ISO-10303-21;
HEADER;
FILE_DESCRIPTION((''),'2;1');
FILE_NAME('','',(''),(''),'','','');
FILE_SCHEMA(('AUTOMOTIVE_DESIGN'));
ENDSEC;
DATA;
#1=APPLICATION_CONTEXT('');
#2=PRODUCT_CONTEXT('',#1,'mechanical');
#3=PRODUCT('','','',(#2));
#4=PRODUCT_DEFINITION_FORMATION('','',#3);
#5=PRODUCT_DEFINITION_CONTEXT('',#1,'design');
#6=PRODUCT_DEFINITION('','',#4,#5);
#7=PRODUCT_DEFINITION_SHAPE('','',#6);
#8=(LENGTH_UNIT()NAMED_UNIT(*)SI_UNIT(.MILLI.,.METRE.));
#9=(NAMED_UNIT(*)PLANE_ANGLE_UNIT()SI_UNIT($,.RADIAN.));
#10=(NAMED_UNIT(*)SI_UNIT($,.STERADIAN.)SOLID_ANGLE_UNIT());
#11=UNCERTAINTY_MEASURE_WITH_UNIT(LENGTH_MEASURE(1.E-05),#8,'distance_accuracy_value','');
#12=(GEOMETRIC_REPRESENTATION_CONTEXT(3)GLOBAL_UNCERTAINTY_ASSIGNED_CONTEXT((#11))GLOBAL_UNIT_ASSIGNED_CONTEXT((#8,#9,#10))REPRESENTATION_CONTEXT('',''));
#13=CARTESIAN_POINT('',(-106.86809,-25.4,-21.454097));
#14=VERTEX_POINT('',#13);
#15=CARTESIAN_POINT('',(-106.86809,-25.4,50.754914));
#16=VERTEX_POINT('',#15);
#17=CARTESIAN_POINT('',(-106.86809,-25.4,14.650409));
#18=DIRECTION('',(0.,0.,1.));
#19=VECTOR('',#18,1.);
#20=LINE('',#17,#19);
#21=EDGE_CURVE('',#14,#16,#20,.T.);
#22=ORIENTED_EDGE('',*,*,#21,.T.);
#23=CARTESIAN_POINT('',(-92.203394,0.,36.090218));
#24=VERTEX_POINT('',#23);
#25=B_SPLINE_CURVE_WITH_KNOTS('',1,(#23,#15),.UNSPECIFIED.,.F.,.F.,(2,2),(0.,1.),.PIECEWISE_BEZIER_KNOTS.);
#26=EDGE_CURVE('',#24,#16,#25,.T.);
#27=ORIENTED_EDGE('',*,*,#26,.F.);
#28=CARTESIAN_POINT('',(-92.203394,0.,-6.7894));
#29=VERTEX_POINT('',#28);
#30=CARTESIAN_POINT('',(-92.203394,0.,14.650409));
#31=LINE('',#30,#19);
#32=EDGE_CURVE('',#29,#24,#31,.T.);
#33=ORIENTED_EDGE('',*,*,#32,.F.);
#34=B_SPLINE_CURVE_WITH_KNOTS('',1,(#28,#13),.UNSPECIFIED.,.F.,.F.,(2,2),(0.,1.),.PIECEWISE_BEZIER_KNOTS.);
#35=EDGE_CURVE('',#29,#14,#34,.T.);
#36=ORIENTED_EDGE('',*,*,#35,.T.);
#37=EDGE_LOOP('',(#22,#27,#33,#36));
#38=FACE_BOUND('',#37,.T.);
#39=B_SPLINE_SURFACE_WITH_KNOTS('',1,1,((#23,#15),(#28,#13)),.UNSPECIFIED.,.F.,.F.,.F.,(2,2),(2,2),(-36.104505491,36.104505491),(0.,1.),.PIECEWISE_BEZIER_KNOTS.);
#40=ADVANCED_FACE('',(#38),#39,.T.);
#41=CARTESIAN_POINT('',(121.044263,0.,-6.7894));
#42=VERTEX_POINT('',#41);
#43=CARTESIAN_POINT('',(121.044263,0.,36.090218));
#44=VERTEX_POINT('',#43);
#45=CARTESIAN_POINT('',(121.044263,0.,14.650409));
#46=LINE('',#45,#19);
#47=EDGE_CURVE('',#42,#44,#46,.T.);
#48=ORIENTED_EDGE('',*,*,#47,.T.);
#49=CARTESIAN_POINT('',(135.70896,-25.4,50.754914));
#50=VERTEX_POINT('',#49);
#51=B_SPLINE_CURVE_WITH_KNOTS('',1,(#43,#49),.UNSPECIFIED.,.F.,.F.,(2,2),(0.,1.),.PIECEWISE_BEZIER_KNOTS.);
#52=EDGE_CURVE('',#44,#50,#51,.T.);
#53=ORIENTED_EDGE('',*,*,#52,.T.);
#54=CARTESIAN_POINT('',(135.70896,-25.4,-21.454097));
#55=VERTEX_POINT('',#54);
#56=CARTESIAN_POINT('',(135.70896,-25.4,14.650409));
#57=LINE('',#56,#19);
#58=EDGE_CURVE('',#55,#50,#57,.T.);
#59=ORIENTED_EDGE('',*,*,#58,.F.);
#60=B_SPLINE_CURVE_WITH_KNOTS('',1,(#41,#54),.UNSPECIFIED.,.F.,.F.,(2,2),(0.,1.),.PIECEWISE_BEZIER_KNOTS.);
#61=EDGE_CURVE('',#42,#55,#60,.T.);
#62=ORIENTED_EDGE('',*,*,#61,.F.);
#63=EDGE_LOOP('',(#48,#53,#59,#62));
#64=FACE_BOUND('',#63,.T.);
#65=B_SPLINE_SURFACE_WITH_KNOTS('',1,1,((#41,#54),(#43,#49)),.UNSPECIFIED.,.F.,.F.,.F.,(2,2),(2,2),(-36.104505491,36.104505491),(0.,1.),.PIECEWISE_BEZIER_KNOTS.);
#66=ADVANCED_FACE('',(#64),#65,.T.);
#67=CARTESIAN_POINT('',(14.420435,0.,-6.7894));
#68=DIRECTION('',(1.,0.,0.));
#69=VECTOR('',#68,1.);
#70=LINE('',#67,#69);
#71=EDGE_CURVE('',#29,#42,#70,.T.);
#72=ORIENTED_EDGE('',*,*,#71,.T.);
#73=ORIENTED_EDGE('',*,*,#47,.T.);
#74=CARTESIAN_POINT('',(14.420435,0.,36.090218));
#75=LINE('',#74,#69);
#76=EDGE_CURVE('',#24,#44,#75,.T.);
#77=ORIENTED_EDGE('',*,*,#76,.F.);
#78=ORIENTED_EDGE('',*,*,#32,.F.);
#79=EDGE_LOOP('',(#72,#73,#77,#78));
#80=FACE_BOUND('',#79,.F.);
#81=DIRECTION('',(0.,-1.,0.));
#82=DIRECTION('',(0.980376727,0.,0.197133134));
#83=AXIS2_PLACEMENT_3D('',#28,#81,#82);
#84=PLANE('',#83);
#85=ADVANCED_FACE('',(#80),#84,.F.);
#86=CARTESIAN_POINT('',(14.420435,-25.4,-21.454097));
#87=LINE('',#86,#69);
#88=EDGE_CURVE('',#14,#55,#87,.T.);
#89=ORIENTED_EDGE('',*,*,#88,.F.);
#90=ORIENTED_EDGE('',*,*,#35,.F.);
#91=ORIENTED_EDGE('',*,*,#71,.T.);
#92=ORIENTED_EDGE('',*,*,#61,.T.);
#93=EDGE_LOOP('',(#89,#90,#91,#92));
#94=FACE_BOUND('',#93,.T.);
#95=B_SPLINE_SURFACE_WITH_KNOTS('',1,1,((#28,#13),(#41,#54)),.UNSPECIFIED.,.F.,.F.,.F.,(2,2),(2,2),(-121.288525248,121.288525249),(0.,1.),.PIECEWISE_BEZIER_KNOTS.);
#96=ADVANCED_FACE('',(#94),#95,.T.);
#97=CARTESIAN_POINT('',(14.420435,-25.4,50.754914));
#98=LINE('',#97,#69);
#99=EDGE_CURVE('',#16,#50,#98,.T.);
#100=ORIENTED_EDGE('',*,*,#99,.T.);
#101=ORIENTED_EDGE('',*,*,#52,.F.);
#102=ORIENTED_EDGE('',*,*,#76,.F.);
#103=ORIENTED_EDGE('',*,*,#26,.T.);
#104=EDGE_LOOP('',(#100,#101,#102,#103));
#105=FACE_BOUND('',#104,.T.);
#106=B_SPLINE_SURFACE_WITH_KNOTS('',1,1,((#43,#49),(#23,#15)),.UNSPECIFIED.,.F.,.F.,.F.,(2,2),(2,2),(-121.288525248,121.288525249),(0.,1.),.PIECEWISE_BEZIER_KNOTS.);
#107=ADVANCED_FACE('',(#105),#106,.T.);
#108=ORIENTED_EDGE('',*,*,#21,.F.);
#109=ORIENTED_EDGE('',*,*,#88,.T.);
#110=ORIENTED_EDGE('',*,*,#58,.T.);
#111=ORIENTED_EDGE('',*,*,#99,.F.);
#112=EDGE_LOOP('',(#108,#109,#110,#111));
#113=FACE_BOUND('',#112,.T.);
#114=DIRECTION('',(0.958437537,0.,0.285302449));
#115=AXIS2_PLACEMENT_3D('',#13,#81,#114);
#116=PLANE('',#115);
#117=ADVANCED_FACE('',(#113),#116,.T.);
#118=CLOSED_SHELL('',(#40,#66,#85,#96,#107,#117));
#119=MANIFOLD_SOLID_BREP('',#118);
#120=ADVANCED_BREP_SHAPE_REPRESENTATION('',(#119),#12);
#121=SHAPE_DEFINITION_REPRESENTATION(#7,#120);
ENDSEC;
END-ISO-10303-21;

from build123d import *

# Parameters (mm, degrees)
F0_W     = 213.2476568222
F0_H     = 42.8796173073
F1_DEPTH = 25.4
F1_TAPER = -30


# Not quite as in the source:
# - a feature of the source that left no trace in its solid (it failed there, or was rolled back) is left out


with BuildPart() as f1:
    # F0 (on Front) → F1 (new body)
    with BuildSketch(Plane.XZ):
        with Locations((14.4204348326, 14.6504088771)):
            Rectangle(F0_W, F0_H)
    extrude(amount=F1_DEPTH, taper=F1_TAPER)


solid = f1.part
